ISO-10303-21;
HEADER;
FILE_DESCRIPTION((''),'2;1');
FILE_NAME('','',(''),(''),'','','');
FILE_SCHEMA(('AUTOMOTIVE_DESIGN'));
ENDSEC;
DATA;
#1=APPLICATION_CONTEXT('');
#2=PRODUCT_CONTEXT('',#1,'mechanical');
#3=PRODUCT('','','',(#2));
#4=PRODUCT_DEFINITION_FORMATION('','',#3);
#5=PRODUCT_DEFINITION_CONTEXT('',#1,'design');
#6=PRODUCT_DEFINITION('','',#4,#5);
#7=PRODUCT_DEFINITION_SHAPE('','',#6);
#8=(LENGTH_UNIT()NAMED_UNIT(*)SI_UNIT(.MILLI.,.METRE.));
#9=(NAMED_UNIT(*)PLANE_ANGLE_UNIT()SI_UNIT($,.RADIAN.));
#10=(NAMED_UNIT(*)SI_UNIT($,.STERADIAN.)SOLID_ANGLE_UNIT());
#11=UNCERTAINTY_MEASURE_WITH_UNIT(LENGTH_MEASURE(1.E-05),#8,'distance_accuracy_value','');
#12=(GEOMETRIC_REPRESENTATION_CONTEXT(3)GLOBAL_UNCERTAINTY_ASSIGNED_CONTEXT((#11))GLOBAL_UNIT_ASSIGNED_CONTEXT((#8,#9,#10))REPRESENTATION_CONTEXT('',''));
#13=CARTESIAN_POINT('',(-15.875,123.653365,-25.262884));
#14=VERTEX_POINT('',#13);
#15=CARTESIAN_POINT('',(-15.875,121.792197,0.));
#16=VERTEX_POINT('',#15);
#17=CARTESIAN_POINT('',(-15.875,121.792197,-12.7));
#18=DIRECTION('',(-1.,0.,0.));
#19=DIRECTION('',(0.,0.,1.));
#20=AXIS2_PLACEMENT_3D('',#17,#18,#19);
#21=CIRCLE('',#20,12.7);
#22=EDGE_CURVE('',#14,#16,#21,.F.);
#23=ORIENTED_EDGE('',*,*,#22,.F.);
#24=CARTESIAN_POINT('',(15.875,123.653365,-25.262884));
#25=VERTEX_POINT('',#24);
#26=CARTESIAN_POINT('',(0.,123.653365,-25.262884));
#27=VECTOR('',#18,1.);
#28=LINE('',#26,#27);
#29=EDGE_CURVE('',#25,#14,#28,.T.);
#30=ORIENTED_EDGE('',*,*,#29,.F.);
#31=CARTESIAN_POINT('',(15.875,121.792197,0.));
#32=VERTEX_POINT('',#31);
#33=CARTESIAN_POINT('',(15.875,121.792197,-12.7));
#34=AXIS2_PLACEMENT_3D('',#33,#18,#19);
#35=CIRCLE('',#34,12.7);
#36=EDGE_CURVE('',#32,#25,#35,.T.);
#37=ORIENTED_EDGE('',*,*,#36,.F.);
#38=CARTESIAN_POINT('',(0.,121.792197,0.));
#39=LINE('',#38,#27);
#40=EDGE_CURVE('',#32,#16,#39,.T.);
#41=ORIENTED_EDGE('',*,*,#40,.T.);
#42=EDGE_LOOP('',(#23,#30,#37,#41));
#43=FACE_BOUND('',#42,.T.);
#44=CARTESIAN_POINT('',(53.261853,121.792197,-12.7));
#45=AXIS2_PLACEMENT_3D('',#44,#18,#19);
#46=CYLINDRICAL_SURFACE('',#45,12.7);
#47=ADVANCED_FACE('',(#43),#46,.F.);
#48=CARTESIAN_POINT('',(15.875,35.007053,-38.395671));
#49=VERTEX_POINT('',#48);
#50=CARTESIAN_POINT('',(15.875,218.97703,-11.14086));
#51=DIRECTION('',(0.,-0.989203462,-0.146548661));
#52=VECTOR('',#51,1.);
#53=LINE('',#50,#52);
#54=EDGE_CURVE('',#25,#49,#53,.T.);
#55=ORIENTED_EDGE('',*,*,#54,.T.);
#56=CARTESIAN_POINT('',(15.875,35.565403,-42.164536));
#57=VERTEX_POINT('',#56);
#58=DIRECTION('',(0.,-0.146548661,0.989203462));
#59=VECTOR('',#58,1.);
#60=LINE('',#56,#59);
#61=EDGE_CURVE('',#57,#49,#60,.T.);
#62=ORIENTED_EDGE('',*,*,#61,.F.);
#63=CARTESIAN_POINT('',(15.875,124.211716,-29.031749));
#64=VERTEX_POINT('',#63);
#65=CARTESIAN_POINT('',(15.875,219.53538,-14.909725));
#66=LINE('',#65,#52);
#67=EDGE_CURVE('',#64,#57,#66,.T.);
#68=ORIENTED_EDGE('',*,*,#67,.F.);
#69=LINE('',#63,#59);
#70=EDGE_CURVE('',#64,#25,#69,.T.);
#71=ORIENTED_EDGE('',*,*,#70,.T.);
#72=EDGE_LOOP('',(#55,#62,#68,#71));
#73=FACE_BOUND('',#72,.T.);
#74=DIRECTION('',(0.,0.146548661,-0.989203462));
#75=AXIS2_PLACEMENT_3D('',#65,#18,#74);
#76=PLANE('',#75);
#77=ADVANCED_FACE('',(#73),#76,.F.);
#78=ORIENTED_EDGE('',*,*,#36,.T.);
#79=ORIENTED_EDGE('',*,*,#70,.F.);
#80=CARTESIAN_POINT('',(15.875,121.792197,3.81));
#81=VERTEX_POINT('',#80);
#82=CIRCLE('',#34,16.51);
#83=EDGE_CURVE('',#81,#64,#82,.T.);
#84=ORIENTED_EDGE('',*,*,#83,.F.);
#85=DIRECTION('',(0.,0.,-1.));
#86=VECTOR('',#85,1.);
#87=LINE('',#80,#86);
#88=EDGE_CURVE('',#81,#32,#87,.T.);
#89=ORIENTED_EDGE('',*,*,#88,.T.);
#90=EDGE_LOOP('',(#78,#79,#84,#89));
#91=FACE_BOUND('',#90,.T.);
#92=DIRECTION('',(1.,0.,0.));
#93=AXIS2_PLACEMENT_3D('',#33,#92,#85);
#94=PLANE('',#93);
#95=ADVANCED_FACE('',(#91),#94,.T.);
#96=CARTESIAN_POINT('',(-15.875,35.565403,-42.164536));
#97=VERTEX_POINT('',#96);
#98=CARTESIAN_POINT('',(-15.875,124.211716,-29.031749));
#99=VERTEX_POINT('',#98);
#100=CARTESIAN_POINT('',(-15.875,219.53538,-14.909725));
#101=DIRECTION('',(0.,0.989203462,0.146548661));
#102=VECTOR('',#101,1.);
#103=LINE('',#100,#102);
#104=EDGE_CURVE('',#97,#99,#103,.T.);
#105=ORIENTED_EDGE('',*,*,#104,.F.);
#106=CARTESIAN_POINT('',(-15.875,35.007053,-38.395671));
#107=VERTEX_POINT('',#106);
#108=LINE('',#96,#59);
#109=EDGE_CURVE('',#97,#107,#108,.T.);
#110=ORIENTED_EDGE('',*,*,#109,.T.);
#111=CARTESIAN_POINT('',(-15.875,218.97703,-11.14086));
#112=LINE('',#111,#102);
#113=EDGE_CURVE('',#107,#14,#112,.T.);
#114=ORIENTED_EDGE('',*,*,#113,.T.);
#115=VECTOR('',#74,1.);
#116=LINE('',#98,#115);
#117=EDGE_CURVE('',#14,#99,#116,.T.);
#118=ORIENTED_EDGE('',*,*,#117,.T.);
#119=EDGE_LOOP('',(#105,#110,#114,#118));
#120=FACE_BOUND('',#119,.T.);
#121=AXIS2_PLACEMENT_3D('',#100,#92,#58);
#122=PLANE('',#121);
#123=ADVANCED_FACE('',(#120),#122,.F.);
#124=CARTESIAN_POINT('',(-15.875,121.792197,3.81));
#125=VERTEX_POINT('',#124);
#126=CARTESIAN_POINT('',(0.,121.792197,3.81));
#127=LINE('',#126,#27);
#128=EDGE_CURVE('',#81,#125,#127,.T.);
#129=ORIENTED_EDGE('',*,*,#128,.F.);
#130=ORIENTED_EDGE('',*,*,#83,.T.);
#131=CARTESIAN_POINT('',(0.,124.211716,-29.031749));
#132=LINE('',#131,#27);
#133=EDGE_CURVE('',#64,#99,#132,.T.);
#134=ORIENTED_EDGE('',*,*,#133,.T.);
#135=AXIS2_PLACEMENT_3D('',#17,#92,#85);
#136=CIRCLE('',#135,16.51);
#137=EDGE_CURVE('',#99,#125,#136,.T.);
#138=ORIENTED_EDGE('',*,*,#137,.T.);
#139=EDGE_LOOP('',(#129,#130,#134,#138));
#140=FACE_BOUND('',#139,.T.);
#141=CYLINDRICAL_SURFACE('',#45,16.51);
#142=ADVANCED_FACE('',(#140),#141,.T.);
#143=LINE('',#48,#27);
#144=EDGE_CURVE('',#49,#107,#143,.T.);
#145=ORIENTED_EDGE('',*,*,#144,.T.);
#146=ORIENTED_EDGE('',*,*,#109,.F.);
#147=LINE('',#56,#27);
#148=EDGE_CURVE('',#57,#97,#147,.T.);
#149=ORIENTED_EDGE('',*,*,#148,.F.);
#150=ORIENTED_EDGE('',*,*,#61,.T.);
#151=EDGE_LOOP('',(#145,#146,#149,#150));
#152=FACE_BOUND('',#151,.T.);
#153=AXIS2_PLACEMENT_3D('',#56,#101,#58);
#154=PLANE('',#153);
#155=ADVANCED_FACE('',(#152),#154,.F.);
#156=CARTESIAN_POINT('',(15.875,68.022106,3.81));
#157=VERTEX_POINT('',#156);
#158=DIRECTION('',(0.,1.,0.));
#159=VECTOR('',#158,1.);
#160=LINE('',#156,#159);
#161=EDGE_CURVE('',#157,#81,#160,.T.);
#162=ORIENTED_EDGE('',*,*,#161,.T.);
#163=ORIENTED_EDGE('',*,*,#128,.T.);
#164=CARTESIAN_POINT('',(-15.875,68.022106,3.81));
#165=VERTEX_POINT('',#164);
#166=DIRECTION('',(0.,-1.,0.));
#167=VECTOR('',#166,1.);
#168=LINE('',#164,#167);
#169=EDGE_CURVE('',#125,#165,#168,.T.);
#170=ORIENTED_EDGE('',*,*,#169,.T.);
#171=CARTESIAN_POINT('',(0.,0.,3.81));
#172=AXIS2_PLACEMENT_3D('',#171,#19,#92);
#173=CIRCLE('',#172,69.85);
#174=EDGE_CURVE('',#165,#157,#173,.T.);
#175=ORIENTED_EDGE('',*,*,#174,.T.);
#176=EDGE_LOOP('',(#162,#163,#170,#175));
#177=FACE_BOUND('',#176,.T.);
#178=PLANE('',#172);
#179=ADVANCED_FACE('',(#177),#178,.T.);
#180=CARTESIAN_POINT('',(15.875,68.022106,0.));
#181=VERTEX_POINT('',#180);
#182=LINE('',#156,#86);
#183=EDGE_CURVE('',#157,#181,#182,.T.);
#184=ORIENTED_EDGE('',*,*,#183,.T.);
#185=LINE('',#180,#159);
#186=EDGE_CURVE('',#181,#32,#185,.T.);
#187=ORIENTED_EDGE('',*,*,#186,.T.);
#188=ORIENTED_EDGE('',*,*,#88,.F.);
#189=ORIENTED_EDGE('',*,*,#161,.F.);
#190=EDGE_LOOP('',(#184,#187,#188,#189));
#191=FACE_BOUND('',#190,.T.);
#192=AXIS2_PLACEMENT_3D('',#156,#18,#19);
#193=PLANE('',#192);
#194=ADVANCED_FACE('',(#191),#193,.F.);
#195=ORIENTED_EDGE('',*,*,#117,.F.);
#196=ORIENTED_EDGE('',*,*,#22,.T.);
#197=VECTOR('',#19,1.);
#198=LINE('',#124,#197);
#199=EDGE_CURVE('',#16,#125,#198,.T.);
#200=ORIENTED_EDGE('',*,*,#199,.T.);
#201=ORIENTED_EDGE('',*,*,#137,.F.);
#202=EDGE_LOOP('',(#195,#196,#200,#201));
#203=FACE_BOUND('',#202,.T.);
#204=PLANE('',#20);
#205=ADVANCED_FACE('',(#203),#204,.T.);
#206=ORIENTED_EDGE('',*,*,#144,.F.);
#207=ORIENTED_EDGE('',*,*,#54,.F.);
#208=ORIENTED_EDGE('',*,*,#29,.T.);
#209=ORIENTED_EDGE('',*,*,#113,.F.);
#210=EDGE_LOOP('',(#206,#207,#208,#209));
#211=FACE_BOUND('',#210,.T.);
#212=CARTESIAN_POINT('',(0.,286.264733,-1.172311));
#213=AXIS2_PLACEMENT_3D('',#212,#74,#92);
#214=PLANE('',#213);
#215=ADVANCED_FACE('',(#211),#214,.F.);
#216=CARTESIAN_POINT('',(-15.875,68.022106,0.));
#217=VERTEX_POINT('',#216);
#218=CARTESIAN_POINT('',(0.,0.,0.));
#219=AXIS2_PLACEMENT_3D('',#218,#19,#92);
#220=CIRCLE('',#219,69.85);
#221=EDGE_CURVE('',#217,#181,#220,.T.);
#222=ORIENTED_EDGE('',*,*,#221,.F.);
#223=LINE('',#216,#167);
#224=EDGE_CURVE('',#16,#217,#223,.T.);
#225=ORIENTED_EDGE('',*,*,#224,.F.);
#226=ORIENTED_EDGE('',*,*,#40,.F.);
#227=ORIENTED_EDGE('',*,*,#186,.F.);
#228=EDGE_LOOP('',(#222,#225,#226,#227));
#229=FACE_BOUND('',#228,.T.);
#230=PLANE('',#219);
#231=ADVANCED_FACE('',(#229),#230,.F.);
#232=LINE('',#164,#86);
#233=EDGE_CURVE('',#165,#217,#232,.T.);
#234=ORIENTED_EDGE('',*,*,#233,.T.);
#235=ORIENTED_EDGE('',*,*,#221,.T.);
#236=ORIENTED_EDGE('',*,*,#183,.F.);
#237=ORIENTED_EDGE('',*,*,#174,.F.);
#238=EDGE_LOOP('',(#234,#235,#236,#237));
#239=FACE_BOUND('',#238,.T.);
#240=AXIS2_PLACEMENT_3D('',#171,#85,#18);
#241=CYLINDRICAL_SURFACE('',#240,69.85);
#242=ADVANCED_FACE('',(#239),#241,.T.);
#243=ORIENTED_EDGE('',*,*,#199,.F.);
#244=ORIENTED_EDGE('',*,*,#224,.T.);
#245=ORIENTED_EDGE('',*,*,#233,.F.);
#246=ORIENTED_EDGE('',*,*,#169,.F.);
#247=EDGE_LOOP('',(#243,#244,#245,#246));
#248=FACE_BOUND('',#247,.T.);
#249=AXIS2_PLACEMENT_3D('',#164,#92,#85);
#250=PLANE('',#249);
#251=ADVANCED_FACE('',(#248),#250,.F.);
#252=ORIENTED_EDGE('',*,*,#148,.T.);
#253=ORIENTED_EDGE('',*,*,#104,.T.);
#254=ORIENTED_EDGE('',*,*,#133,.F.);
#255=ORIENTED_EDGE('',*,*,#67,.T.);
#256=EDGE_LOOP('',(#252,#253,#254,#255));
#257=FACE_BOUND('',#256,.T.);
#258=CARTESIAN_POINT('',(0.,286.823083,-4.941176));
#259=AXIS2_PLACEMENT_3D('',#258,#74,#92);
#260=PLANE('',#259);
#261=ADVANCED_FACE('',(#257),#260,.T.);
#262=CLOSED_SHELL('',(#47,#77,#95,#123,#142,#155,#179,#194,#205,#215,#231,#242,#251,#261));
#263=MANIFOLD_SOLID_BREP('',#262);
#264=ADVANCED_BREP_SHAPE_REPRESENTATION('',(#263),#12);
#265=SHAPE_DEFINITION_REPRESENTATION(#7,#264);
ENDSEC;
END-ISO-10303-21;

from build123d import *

# Parameters (mm, degrees)
BASE_EXTRUDE_DEPTH     = 3.81
SKETCHED_START         = -15.875
SKETCHED_BEND1_DEPTH   = 31.75
SKETCHED_BEND1_2_DEPTH = 31.75


# Read off the part's stored shape, not the designer's step: Sketched Bend1
with BuildPart() as part:
    # Sketch1 → Base-Extrude (new body)
    with BuildSketch(Plane.XY):
        with BuildLine():
            Line((15.875, 68.022105782), (15.875, 254))
            Line((15.875, 254), (-15.875, 254))
            Line((-15.875, 254), (-15.875, 68.022105782))
            ThreePointArc((-15.875, 68.022105782), (0, -69.85), (15.875, 68.022105782))
        make_face()
    extrude(amount=BASE_EXTRUDE_DEPTH)

    # Sketched Bend1 outline → Sketched Bend1 (cut)
    with BuildSketch(Plane.YZ.offset(SKETCHED_START)):
        with BuildLine():
            ThreePointArc((121.7921973, 3.81), (127.40036545, 2.828314461), (132.341609606, 0))
            Line((132.341609606, 0), (254, 0))
            Line((254, 0), (254, 3.81))
            Line((254, 3.81), (121.7921973, 3.81))
        make_face()
    extrude(amount=SKETCHED_BEND1_DEPTH, mode=Mode.SUBTRACT)

    # Sketched Bend1 2 outline → Sketched Bend1 2 (add)
    with BuildSketch(Plane.YZ.offset(SKETCHED_START)):
        with BuildLine():
            Line((123.653365296, -25.262883972), (35.007053077, -38.395670967))
            Line((35.007053077, -38.395670967), (35.565403476, -42.164536159))
            Line((35.565403476, -42.164536159), (124.211715695, -29.031749163))
            ThreePointArc((124.211715695, -29.031749163), (137.690590482, -17.152099982), (132.341609606, 0))
            Line((132.341609606, 0), (121.7921973, 0))
            ThreePointArc((121.7921973, 0), (134.457871906, -11.766894015), (123.653365296, -25.262883972))
        make_face()
    extrude(amount=SKETCHED_BEND1_2_DEPTH)


solid = part.part
